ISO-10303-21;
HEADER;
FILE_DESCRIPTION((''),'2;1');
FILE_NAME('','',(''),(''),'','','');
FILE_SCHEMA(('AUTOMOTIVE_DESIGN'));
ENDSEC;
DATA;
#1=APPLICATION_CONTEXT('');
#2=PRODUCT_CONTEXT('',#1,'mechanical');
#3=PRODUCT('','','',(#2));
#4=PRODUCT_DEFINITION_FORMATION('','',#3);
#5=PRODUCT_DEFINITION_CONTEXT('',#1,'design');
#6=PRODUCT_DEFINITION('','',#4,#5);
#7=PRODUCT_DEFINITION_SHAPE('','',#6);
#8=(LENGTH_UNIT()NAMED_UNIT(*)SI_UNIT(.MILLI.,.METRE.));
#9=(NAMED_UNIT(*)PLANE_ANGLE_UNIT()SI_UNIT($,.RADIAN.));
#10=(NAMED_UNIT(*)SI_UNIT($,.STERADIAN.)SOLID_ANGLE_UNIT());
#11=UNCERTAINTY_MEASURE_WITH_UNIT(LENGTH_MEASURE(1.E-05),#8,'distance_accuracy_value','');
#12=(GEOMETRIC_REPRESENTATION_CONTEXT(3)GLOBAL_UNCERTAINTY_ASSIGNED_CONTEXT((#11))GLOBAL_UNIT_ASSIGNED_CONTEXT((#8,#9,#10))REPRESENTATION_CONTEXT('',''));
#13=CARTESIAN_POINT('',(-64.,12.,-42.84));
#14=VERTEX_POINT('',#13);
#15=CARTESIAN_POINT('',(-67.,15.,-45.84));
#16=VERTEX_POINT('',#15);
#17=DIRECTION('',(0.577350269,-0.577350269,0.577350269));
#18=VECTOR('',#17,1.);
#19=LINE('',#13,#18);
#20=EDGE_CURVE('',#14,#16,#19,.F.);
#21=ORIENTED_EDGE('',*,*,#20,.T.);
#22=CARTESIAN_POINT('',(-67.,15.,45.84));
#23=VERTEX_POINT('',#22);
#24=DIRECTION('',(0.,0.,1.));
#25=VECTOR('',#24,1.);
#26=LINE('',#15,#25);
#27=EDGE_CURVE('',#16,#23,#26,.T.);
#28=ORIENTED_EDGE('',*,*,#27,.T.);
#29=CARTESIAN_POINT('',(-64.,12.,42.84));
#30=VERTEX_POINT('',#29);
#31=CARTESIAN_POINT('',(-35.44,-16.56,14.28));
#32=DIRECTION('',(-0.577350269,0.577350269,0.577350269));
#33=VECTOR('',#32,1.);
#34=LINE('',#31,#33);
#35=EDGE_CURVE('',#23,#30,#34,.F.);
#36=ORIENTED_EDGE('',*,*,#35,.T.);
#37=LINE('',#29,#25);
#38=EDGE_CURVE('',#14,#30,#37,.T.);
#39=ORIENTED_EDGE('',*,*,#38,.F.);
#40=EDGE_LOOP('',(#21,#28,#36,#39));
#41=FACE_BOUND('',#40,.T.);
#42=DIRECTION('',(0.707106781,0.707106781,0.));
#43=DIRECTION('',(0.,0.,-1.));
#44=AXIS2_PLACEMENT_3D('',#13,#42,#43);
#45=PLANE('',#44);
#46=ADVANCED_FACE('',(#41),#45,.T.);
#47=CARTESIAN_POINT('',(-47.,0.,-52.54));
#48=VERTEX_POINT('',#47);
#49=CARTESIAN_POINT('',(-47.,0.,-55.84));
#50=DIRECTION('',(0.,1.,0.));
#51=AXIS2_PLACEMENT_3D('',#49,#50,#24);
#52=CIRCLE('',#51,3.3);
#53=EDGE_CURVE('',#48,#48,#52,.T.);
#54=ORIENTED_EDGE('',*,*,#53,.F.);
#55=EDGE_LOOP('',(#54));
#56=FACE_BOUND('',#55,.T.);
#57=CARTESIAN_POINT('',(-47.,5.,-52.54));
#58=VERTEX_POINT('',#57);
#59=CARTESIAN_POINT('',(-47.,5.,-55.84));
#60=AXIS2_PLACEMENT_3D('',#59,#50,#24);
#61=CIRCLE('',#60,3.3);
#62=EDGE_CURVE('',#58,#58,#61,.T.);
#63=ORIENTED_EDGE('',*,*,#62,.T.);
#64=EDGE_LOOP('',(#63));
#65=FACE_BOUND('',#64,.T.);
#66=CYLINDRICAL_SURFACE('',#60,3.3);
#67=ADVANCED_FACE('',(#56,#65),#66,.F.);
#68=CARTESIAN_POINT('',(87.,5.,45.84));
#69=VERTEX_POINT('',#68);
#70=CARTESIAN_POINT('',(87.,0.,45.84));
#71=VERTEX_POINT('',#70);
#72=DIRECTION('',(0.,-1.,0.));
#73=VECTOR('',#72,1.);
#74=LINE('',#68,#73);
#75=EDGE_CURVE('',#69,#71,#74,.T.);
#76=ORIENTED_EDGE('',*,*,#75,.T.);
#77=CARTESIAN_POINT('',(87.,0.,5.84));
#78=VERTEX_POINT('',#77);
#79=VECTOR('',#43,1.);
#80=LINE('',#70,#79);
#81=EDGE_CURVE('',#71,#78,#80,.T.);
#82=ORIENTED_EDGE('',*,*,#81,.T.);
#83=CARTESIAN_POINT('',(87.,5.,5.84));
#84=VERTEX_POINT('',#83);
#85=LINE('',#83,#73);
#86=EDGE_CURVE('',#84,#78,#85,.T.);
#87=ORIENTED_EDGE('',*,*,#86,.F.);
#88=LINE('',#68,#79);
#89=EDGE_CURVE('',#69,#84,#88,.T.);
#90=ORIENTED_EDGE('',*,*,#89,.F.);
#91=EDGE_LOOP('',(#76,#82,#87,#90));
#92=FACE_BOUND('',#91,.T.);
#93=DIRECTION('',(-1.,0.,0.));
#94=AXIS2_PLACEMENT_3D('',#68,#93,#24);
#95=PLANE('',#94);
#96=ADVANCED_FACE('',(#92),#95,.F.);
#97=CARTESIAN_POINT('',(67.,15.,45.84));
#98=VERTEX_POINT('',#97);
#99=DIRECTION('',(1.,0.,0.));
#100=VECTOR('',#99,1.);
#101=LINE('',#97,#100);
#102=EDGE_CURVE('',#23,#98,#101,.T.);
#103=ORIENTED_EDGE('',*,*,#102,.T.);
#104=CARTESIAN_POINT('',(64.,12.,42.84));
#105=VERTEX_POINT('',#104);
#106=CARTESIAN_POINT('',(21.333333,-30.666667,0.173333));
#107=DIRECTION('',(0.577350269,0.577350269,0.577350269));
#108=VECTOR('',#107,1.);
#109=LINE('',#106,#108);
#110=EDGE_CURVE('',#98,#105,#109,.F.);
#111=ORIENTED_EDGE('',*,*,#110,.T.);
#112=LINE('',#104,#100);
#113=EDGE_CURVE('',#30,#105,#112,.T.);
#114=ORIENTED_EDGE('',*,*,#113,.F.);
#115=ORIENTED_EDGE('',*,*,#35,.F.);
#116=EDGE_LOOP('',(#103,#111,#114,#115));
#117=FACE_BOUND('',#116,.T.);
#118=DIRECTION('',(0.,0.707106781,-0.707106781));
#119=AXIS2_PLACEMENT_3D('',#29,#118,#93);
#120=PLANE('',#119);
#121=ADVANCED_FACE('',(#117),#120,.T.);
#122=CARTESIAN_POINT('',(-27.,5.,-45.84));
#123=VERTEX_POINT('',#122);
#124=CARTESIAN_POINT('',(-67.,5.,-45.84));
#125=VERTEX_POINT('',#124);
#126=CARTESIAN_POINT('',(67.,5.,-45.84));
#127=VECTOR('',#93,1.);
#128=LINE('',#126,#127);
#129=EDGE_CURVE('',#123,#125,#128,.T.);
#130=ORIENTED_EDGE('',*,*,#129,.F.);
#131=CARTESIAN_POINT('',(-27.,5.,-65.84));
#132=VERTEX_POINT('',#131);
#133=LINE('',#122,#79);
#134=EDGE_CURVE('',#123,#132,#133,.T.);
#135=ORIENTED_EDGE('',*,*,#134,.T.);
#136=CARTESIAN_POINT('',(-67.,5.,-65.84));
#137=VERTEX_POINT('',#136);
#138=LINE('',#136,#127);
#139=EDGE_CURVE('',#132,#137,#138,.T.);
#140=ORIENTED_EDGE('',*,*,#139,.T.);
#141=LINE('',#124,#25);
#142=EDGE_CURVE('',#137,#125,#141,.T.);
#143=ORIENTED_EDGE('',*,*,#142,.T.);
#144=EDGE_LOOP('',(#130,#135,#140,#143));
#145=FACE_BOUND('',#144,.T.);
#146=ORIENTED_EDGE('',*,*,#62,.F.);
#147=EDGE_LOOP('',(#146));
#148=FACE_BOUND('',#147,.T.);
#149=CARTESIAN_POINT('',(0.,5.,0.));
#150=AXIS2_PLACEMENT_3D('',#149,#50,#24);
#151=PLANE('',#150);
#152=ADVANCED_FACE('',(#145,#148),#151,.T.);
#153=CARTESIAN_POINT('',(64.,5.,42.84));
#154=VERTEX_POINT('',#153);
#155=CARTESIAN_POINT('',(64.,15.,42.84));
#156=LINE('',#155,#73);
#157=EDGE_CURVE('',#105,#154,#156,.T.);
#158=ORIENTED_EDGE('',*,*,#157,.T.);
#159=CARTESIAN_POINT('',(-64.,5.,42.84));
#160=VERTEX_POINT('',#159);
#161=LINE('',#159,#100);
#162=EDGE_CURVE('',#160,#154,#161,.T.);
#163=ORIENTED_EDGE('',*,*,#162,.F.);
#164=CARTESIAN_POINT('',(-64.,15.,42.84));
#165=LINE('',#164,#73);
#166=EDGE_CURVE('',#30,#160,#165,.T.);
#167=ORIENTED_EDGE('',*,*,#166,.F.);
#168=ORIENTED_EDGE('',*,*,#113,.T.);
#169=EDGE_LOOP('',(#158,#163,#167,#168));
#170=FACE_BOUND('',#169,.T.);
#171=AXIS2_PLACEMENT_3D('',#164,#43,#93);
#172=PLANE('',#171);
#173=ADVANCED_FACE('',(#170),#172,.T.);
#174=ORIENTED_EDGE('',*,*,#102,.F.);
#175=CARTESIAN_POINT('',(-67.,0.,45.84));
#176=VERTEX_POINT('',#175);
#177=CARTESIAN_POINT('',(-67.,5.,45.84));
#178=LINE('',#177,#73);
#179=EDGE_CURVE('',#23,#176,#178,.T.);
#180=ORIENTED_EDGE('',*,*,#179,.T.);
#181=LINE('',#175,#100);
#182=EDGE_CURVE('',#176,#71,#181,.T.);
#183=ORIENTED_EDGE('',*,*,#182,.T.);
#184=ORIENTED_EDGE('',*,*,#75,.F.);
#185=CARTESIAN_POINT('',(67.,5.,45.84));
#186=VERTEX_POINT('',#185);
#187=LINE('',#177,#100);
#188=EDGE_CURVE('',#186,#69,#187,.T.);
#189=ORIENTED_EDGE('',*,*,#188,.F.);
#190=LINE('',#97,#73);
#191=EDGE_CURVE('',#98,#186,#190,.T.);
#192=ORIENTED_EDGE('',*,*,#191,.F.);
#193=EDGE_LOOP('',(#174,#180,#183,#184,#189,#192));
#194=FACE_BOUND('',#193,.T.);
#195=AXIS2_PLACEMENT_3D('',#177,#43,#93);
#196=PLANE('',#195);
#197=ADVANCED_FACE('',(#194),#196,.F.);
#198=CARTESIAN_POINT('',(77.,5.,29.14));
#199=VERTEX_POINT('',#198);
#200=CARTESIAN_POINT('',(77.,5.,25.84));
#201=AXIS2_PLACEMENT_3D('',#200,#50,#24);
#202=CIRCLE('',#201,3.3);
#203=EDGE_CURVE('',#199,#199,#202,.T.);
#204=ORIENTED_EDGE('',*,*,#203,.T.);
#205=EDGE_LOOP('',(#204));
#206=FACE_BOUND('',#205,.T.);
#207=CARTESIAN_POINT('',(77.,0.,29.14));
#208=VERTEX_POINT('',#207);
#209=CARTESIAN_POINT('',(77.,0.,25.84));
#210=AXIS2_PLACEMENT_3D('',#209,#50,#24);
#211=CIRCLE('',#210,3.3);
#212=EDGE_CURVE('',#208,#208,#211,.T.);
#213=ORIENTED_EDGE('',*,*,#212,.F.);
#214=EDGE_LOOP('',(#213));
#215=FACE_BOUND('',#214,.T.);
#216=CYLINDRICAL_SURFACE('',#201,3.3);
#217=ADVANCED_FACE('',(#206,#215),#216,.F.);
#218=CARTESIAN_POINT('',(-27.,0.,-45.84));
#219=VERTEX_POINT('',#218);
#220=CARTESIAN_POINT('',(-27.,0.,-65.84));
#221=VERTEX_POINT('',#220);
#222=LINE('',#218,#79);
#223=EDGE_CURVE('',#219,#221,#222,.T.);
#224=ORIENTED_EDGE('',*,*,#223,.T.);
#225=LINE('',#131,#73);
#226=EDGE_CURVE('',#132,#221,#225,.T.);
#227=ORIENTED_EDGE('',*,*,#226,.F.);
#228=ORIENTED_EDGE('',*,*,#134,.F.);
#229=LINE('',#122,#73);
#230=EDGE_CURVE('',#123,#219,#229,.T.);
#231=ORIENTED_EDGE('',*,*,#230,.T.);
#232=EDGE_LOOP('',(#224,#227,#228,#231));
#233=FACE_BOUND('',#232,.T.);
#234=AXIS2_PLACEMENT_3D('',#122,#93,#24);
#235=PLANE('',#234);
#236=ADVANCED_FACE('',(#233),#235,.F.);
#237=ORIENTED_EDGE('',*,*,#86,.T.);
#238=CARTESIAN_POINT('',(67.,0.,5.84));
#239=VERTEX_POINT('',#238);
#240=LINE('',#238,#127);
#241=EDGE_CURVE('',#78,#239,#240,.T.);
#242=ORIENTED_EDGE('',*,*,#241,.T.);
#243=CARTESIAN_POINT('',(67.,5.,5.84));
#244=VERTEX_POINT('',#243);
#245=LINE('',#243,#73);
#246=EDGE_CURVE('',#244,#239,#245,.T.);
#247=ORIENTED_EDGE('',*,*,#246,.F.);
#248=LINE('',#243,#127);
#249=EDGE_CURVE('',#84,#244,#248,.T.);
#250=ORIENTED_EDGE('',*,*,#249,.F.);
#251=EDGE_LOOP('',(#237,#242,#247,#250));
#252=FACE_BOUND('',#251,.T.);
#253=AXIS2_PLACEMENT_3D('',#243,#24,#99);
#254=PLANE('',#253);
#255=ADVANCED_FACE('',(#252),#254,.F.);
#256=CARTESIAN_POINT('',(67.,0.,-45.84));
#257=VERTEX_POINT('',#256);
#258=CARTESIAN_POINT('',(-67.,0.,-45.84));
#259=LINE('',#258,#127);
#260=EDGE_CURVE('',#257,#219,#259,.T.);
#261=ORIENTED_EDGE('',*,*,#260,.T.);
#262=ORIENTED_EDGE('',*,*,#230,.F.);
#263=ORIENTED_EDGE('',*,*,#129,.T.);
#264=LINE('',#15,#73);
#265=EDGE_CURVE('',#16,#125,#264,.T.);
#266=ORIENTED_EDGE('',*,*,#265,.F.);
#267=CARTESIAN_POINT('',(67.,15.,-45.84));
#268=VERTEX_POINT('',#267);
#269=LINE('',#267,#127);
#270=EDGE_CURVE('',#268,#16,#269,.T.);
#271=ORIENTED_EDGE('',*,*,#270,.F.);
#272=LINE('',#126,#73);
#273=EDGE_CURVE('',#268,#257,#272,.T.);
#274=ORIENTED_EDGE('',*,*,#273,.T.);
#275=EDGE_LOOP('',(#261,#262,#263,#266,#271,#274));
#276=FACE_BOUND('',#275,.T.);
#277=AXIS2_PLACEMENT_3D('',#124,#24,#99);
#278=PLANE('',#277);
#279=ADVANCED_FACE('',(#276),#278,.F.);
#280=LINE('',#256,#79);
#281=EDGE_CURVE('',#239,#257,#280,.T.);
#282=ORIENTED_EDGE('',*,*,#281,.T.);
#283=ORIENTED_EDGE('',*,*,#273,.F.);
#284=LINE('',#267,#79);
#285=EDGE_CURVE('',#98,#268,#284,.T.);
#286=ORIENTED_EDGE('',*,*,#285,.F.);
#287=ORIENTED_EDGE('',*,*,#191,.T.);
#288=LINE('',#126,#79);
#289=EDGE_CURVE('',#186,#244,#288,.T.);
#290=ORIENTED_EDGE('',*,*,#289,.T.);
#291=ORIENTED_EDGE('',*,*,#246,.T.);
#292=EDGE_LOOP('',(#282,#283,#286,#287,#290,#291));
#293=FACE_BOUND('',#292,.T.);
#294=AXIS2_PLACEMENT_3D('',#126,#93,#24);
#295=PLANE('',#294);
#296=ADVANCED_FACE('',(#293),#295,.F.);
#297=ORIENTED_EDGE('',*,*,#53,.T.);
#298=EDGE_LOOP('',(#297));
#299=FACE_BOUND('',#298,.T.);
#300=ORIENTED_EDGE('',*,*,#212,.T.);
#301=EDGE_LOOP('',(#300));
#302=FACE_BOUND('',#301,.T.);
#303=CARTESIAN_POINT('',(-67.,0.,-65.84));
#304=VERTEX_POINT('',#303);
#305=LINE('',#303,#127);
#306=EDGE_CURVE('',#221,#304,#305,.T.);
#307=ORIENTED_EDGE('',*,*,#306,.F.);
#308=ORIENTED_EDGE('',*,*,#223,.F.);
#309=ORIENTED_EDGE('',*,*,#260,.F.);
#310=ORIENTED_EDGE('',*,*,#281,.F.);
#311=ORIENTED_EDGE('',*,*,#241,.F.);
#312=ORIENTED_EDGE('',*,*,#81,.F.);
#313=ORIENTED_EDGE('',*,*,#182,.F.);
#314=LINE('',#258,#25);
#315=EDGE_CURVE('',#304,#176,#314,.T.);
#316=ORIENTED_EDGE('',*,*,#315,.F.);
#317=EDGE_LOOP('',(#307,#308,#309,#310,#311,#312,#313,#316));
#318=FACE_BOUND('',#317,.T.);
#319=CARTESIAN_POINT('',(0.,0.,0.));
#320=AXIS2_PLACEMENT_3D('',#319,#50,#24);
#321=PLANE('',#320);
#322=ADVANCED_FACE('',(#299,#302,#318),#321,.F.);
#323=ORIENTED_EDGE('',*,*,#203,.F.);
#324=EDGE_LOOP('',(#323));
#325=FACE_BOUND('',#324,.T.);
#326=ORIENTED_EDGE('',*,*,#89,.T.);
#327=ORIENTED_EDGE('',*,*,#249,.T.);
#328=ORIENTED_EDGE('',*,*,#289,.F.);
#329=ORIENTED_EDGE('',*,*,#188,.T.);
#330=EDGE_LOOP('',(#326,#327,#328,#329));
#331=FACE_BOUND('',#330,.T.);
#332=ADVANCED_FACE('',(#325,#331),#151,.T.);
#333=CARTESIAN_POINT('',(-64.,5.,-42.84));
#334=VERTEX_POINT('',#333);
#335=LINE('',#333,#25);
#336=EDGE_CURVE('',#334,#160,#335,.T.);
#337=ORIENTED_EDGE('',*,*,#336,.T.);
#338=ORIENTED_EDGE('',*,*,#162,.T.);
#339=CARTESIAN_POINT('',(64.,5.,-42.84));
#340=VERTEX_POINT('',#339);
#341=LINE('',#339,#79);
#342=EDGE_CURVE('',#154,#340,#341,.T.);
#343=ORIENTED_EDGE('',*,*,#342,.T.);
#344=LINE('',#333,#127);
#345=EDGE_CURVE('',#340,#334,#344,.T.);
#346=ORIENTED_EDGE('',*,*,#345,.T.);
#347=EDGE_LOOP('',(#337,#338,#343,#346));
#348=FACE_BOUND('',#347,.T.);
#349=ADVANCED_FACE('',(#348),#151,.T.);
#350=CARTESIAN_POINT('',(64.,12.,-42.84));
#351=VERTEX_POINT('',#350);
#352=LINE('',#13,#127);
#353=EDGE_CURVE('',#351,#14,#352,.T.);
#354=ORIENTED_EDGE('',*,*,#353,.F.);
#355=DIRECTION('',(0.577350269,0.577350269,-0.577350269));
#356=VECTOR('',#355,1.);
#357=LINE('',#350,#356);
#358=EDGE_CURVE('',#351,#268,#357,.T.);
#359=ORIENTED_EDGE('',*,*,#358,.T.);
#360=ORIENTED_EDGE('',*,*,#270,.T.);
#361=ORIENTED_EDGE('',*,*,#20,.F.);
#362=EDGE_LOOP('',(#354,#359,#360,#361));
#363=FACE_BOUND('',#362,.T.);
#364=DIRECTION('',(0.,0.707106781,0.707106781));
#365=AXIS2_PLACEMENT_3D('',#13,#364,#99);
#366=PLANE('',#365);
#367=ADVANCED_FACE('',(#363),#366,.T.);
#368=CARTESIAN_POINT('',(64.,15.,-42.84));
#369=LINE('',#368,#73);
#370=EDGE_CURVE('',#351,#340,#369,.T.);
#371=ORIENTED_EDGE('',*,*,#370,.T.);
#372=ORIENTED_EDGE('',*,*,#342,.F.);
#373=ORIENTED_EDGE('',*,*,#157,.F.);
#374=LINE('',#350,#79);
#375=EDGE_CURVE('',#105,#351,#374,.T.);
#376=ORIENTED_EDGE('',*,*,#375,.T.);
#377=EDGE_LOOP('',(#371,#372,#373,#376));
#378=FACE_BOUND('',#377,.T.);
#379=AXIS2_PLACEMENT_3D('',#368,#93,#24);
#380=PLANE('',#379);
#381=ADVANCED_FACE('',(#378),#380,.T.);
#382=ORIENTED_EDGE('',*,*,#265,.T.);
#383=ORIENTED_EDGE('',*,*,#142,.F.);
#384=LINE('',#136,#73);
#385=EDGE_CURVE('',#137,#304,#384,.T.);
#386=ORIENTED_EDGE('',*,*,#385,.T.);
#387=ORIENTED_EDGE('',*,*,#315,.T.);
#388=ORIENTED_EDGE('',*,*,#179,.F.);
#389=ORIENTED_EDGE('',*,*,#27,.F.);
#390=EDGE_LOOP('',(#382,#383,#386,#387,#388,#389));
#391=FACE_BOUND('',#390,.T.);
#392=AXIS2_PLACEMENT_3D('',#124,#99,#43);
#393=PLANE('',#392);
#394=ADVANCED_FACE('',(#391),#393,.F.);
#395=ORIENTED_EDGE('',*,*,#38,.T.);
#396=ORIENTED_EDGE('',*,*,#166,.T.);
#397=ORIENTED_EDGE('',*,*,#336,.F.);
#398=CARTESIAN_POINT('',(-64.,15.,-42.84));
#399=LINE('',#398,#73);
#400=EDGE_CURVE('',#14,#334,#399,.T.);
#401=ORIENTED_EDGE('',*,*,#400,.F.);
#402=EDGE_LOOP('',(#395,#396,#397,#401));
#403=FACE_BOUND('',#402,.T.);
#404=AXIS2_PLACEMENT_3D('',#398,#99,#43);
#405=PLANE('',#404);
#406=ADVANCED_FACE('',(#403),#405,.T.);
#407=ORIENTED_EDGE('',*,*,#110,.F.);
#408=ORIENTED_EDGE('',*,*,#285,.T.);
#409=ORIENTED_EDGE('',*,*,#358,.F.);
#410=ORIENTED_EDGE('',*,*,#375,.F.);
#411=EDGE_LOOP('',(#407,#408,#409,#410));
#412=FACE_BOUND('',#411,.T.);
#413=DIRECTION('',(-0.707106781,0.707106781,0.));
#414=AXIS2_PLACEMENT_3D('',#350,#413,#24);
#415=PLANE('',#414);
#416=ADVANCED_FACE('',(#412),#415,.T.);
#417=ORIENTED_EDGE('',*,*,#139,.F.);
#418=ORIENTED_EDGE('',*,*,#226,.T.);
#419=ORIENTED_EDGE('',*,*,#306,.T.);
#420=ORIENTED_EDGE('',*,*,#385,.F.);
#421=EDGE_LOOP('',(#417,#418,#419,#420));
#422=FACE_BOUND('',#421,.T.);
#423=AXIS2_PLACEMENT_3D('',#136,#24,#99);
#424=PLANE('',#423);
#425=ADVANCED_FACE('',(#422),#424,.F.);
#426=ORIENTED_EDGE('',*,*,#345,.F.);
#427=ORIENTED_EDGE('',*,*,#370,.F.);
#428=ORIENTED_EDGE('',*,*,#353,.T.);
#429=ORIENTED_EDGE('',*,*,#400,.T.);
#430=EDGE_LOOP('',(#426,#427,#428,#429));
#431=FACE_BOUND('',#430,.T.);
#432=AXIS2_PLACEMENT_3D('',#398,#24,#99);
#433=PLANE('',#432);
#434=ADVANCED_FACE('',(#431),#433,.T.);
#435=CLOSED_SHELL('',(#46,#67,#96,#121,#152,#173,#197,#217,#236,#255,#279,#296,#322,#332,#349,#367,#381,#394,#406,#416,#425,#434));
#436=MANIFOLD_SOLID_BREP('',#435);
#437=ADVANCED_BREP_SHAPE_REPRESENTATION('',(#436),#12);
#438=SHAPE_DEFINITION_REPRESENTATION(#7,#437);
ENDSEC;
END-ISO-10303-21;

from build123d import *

# Parameters (mm, degrees)
SKETCH1_W            = 134
SKETCH1_H            = 91.68
BOSS_EXTRUDE1_DEPTH  = 5
SKETCH2_W            = 40
SKETCH2_H            = 20
SKETCH2_W_2          = 20
SKETCH2_H_2          = 40
BOSS_EXTRUDE2_DEPTH  = 5
M6_CLEARANCE_HOLE1_D = 6.6
SKETCH6_W            = 134
SKETCH6_H            = 91.68
SKETCH6_W_2          = 128
SKETCH6_H_2          = 85.68
BOSS_EXTRUDE3_DEPTH  = 10
CHAMFER1_SIZE        = 3


with BuildPart() as part:
    # Sketch1 → Boss-Extrude1 (new body)
    with BuildSketch(Plane(origin=(0, 0, 0), x_dir=(1, 0, 0), z_dir=(0, 1, 0))):
        Rectangle(SKETCH1_W, SKETCH1_H)
    extrude(amount=BOSS_EXTRUDE1_DEPTH)

    # Sketch2 → Boss-Extrude2 (add)
    with BuildSketch(Plane(origin=(0, 0, 0), x_dir=(1, 0, 0), z_dir=(0, 1, 0))):
        with Locations((-47, 55.84)):
            Rectangle(SKETCH2_W, SKETCH2_H)
        with Locations((77, -25.84)):
            Rectangle(SKETCH2_W_2, SKETCH2_H_2)
    extrude(amount=BOSS_EXTRUDE2_DEPTH)

    # M6 Clearance Hole1 (through all)
    with Locations(Plane(origin=(0, 5, 0), x_dir=(1, 0, 0), z_dir=(0, 1, 0))):
        with Locations((-47, 55.84), (77, -25.84)):
            Hole(M6_CLEARANCE_HOLE1_D / 2)

    # Sketch6 → Boss-Extrude3 (add)
    with BuildSketch(Plane(origin=(0, 5, 0), x_dir=(1, 0, 0), z_dir=(0, 1, 0))):
        Rectangle(SKETCH6_W, SKETCH6_H)
        Rectangle(SKETCH6_W_2, SKETCH6_H_2, mode=Mode.SUBTRACT)
    extrude(amount=BOSS_EXTRUDE3_DEPTH)

    # Chamfer1
    chamfer1_edges = [part.edges().sort_by_distance(p)[0] for p in [
        (-64, 15, 0),
        (0, 15, 42.84),
        (64, 15, 0),
        (0, 15, -42.84),
    ]]
    chamfer(chamfer1_edges, length=CHAMFER1_SIZE - 0.0001)  # a hair under: the kernel refuses the full size


solid = part.part
